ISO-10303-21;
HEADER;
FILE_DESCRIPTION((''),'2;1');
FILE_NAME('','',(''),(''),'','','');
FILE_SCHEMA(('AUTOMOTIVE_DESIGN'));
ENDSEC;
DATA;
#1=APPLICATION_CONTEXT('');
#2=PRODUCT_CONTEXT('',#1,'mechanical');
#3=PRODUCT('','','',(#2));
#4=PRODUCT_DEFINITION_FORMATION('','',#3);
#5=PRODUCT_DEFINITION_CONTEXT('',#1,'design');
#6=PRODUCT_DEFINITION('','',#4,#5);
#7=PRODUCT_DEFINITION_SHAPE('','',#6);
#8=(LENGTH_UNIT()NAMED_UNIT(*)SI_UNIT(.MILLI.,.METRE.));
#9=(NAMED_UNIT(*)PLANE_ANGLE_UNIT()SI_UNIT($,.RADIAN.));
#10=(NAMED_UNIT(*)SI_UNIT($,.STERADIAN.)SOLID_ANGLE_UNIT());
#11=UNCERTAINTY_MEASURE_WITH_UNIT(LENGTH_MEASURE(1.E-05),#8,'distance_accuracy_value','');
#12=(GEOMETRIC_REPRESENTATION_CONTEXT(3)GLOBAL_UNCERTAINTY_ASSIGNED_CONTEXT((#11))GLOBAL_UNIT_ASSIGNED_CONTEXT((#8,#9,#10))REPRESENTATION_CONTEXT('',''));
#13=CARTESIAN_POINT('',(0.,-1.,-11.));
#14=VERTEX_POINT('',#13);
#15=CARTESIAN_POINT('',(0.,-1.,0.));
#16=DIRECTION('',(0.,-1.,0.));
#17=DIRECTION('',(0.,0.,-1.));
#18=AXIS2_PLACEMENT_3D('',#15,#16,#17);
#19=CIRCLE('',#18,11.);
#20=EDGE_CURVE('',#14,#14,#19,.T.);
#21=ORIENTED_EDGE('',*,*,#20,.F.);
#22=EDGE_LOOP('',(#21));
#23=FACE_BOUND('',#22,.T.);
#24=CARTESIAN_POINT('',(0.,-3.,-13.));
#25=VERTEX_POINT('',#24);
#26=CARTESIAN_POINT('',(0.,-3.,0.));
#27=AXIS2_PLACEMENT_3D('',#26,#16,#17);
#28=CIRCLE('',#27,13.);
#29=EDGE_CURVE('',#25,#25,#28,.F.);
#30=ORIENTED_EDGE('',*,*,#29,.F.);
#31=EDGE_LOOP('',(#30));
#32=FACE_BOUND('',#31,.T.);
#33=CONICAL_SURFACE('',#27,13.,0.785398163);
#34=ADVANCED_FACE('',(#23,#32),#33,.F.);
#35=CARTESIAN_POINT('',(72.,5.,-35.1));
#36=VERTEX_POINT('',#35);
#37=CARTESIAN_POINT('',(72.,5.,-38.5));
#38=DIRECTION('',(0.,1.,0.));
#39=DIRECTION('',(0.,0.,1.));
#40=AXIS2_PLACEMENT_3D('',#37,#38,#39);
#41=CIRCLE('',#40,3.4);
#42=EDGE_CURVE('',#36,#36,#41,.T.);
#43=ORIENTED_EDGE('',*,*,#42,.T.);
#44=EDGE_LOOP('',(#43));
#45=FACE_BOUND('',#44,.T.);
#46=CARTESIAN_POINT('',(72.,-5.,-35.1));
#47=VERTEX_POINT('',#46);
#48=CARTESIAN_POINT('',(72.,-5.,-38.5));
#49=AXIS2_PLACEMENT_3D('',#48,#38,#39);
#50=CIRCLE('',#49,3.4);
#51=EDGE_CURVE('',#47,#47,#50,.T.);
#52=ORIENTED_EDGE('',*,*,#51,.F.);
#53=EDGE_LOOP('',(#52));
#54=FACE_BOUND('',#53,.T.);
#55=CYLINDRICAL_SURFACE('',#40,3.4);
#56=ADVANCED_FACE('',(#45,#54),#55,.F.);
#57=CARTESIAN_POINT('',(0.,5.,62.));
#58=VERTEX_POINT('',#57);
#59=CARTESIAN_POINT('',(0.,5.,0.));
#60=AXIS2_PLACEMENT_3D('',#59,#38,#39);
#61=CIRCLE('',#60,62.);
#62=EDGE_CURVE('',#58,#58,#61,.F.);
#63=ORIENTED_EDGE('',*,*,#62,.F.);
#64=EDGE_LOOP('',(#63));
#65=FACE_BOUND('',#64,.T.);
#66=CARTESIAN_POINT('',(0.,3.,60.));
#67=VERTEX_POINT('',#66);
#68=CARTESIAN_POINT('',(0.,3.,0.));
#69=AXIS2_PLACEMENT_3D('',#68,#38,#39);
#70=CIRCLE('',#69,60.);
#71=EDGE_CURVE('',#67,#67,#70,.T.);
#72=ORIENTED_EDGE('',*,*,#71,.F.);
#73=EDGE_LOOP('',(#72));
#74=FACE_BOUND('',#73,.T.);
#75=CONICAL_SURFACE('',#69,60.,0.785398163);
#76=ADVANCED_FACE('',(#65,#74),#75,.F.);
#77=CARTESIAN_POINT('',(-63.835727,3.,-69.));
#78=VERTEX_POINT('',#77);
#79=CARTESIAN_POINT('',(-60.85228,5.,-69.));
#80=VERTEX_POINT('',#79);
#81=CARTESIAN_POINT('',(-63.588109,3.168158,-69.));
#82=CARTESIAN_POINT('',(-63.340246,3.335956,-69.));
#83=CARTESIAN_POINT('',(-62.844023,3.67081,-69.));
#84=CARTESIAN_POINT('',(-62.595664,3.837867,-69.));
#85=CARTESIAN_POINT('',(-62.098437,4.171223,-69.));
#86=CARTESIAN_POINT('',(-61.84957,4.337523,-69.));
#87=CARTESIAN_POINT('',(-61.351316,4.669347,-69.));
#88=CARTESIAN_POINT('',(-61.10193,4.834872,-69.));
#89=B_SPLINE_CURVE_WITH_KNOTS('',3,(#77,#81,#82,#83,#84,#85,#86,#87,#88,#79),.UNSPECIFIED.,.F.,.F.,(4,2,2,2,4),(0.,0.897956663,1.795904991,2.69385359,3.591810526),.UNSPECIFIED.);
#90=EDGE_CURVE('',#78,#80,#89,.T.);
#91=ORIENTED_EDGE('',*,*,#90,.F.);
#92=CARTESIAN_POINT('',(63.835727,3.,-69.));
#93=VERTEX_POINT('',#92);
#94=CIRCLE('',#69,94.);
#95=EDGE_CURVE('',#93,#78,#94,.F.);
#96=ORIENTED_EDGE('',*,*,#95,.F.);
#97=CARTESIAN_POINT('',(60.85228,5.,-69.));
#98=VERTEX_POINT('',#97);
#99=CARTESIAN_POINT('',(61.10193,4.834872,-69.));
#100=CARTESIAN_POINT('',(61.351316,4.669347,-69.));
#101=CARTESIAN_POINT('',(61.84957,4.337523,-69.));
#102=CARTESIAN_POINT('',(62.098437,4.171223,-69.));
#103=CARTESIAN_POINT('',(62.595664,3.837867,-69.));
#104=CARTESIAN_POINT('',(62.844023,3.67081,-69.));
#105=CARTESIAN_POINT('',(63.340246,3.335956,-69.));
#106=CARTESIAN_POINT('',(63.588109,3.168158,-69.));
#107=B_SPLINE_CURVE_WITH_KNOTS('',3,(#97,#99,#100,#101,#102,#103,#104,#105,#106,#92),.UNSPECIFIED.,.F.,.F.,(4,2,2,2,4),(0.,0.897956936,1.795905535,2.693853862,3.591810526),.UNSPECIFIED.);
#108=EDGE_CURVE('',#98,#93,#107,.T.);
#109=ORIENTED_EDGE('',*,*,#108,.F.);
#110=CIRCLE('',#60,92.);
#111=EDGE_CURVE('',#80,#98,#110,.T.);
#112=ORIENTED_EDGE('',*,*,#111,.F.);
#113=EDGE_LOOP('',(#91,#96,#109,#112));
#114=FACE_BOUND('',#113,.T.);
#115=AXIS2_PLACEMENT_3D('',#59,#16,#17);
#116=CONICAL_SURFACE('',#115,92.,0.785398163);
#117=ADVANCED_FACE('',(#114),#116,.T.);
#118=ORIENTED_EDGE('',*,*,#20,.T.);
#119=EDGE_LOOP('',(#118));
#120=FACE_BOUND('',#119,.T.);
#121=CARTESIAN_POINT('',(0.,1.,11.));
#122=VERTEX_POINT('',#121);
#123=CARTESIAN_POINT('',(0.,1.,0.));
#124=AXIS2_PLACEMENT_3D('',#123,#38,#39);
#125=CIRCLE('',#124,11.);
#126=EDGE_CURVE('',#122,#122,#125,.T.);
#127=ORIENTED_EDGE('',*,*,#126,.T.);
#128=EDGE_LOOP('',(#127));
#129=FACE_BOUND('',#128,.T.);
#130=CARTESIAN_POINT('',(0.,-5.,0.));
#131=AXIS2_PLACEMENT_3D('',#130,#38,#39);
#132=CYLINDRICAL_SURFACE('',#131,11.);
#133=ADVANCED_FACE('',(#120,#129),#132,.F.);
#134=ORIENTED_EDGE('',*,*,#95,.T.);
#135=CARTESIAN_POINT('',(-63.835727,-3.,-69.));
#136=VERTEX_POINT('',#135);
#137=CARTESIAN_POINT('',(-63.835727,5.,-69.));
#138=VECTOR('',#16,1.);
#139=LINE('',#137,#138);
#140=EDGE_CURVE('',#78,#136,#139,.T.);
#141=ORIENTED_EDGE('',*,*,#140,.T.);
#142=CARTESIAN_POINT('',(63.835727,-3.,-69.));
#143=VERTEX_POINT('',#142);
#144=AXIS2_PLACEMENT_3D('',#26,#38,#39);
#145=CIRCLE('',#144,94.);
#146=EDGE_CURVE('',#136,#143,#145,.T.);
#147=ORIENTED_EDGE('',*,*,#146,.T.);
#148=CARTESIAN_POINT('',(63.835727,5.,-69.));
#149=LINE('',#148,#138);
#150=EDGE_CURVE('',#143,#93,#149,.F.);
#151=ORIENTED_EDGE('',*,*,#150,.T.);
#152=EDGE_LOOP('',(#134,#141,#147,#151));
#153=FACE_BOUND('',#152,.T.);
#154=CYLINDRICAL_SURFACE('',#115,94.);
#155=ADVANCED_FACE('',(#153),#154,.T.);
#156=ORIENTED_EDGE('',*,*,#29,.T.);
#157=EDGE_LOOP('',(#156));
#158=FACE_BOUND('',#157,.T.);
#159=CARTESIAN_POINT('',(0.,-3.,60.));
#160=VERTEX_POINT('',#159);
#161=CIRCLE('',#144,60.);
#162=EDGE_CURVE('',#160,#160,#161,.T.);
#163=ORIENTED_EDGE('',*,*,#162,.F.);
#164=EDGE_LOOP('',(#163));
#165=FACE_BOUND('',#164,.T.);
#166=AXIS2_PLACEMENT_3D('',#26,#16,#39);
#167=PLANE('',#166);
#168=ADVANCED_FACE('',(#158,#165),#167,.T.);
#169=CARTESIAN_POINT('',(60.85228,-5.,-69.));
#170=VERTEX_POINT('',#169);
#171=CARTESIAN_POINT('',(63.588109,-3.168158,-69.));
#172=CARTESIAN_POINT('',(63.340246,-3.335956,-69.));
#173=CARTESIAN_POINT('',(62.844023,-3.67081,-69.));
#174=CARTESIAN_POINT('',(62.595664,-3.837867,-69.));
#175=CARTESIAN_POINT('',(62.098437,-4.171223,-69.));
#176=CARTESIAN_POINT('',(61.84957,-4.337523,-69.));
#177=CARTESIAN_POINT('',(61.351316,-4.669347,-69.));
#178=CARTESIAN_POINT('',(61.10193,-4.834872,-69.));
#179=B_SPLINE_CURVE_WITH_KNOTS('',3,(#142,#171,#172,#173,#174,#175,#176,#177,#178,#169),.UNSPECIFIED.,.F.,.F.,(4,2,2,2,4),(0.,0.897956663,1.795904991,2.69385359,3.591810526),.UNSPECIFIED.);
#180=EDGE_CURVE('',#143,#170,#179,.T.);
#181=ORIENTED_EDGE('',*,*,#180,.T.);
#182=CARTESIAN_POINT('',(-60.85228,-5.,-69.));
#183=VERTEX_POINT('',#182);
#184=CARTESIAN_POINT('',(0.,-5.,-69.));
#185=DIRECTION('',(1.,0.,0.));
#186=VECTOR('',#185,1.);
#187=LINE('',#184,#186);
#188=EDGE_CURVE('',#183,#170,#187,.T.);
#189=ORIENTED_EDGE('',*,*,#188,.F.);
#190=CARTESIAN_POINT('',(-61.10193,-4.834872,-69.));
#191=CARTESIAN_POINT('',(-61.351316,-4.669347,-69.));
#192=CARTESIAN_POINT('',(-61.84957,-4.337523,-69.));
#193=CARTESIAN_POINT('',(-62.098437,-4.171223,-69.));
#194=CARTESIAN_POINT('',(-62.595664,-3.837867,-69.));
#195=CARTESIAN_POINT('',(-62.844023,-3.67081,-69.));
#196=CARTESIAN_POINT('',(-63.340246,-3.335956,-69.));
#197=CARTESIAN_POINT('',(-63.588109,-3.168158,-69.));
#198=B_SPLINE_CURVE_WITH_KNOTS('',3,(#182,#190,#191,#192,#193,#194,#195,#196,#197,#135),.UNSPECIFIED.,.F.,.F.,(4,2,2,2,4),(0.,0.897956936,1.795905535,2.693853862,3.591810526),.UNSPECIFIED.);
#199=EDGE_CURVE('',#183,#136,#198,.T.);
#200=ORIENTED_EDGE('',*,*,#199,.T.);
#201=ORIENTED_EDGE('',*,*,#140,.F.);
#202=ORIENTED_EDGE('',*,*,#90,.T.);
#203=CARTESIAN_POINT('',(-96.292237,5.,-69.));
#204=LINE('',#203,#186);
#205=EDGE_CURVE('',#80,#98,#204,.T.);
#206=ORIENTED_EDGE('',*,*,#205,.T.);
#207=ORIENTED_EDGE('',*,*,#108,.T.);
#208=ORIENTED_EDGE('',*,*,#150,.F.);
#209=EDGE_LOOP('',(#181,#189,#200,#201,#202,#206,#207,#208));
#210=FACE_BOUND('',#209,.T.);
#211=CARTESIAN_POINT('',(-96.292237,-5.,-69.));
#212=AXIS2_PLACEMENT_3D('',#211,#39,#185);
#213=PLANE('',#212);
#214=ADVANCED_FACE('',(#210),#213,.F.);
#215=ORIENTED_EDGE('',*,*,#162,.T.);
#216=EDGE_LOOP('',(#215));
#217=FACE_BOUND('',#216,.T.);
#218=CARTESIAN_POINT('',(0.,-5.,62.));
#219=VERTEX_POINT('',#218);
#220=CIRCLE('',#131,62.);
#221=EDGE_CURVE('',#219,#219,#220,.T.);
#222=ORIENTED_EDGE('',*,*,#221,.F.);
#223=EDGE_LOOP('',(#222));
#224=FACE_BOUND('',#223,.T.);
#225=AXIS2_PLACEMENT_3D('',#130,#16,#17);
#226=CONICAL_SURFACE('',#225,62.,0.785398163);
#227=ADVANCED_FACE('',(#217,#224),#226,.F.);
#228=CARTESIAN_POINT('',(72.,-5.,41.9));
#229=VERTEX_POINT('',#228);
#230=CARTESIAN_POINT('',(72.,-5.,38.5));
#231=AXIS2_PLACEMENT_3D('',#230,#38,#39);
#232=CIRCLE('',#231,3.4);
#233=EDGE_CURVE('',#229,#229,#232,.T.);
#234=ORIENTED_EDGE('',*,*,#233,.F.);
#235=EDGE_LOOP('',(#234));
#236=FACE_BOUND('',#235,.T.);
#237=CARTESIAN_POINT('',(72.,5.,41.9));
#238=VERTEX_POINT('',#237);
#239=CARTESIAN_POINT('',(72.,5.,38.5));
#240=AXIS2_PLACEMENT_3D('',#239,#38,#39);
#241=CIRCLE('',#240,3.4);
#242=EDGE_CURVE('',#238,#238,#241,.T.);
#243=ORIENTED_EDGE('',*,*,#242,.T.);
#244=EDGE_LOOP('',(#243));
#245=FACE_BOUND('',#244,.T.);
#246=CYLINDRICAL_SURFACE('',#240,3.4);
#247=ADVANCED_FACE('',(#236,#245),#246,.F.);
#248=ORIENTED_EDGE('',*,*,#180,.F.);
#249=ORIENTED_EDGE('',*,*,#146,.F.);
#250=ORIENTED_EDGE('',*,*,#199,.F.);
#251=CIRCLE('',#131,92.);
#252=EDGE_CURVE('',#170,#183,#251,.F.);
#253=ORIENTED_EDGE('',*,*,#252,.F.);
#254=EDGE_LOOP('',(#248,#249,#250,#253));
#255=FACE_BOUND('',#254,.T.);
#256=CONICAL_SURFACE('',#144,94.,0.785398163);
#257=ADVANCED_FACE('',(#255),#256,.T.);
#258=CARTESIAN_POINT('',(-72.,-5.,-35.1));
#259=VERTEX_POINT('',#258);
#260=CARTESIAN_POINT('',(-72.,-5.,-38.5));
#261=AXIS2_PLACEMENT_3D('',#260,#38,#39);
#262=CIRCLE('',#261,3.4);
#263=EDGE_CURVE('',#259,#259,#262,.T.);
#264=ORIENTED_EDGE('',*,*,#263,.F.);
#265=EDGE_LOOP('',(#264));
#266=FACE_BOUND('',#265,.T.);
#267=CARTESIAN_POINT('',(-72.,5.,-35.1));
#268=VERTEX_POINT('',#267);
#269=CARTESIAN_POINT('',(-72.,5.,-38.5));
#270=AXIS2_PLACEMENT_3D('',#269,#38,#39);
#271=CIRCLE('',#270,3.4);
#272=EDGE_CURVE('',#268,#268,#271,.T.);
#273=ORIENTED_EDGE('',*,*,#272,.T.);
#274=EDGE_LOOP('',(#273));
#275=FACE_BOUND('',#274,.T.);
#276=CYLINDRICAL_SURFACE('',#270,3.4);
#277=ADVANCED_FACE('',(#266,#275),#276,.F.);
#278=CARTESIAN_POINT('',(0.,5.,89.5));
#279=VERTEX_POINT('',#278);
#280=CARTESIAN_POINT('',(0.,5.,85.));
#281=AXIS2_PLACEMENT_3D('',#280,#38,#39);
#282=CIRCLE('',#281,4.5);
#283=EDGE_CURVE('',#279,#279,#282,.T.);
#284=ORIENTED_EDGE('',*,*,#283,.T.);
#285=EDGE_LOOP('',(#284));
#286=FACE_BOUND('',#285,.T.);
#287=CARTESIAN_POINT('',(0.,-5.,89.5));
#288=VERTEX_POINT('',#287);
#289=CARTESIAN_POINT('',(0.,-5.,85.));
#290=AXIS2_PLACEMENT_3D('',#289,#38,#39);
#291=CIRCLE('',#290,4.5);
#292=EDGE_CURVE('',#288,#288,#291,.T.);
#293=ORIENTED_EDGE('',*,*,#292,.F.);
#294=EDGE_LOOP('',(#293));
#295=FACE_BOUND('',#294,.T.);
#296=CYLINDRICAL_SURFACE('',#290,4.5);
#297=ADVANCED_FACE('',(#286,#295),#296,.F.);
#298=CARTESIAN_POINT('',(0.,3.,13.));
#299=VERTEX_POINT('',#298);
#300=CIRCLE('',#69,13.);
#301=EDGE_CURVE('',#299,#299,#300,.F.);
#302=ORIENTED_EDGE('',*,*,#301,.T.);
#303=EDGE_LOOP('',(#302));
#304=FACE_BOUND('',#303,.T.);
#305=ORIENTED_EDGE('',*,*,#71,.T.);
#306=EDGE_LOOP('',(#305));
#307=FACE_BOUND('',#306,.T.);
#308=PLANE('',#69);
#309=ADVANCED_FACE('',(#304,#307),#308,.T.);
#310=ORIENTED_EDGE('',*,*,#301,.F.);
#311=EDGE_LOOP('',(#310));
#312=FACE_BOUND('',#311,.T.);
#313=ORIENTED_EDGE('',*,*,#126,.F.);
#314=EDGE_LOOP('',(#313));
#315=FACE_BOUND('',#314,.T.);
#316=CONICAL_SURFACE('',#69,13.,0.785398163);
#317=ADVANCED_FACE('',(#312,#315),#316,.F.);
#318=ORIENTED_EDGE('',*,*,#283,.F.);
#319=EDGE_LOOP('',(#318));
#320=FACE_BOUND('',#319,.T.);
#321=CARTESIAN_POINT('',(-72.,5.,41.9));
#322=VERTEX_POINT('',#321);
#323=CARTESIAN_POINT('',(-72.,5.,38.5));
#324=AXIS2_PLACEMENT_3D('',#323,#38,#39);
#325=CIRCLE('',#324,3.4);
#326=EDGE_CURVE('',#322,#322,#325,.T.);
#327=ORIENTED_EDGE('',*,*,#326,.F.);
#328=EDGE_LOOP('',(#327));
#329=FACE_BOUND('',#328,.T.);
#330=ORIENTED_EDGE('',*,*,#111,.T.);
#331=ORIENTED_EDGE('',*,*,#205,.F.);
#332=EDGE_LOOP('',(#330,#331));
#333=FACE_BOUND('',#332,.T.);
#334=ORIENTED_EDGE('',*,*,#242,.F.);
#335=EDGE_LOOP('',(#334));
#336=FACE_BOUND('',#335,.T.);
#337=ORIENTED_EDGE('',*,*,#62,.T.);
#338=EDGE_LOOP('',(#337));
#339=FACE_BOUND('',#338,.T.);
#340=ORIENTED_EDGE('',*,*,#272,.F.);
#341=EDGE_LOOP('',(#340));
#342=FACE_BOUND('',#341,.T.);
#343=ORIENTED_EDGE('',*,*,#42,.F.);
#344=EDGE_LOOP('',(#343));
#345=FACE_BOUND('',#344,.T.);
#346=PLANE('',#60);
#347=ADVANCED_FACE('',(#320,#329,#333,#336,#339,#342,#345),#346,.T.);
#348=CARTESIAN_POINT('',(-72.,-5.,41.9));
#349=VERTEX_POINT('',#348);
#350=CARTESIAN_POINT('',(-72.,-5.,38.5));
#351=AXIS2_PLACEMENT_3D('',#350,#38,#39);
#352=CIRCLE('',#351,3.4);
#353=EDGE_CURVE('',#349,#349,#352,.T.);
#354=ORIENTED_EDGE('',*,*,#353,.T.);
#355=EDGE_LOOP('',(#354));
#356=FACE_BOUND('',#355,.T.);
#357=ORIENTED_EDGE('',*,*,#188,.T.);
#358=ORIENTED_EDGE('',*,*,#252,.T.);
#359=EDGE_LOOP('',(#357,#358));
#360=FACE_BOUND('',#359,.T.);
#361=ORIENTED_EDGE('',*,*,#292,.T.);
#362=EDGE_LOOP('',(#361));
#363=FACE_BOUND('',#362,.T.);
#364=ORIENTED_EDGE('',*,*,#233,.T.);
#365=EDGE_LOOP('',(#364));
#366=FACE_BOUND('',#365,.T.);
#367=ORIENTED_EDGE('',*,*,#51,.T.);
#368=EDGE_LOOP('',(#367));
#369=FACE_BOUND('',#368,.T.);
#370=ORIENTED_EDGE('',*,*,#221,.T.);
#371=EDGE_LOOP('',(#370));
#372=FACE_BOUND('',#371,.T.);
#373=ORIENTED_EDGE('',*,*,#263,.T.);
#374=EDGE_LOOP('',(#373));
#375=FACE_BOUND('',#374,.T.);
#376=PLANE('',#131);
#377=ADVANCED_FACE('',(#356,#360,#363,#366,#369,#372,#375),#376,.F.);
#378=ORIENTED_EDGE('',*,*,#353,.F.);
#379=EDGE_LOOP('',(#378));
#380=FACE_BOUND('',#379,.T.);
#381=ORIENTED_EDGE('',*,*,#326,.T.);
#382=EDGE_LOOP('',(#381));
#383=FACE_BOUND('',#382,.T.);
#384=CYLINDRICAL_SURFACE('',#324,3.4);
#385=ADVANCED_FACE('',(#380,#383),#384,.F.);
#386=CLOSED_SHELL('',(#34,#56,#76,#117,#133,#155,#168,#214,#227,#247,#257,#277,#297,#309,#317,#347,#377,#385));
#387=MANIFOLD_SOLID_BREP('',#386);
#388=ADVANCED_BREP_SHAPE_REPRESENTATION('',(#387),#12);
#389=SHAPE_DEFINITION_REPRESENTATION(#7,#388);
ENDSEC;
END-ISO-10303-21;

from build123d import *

# Parameters (mm, degrees)
SKETCH_2_R          = 94
EXTRUDE_1_DEPTH     = 5
SKETCH_3_W          = 204.518128244
SKETCH_3_H          = 25
CUT_EXTRUDE_1_DEPTH = 134.311664906
SKETCH_4_R          = 11
CUT_EXTRUDE_2_DEPTH = 134.311664906
SKETCH_5_R          = 60
CUT_EXTRUDE_3_DEPTH = 2
M8X1_25_1_D         = 6.8
M8X1_25_1_DEPTH     = 19.75
M8X1_25_1_TIP       = 2.042926105
SKETCH_8_R          = 4.5
CUT_EXTRUDE_4_DEPTH = 134.311664906
CHAMFER_1_SIZE      = 2


with BuildPart() as part:
    # 草图2 → 凸台-拉伸1 (new, symmetric)
    with BuildSketch(Plane(origin=(0, 0, 0), x_dir=(1, 0, 0), z_dir=(0, 1, 0))):
        with Locations(Location((0, 0, 0), (0, 0, 270))):
            Circle(SKETCH_2_R)
    extrude(amount=EXTRUDE_1_DEPTH, both=True)

    # 草图3 → 切除-拉伸1 (cut, through all)
    with BuildSketch(Plane(origin=(0, 5, 0), x_dir=(1, 0, 0), z_dir=(0, 1, 0))):
        with Locations((5.966826679, 81.5)):
            Rectangle(SKETCH_3_W, SKETCH_3_H)
    extrude(amount=-CUT_EXTRUDE_1_DEPTH, mode=Mode.SUBTRACT)

    # 草图4 → 切除-拉伸2 (cut, through all)
    with BuildSketch(Plane(origin=(0, 5, 0), x_dir=(1, 0, 0), z_dir=(0, 1, 0))):
        with Locations(Location((0, 0, 0), (0, 0, 270))):
            Circle(SKETCH_4_R)
    extrude(amount=-CUT_EXTRUDE_2_DEPTH, mode=Mode.SUBTRACT)

    # 草图5 → 切除-拉伸3 (cut)
    with BuildSketch(Plane(origin=(0, 5, 0), x_dir=(1, 0, 0), z_dir=(0, 1, 0))):
        with Locations(Location((0, 0, 0), (0, 0, 270))):
            Circle(SKETCH_5_R)
    cut_extrude_3 = extrude(amount=-CUT_EXTRUDE_3_DEPTH, mode=Mode.SUBTRACT)

    # 镜向1: 切除-拉伸3 across plane
    add(cut_extrude_3.mirror(Plane.ZX), mode=Mode.SUBTRACT)

    # M8x1.25 螺纹孔1
    with Locations(Plane(origin=(0, 5, 0), x_dir=(-1, 0, 0), z_dir=(0, 1, 0))):
        with Locations((72, -38.5), (-72, -38.5), (72, 38.5), (-72, 38.5)):
            Hole(M8X1_25_1_D / 2, depth=M8X1_25_1_DEPTH)
            with Locations((0, 0, -(M8X1_25_1_DEPTH + M8X1_25_1_TIP / 2))):  # 118° drill point
                Cone(0, M8X1_25_1_D / 2, M8X1_25_1_TIP, mode=Mode.SUBTRACT)

    # 草图8 → 切除-拉伸4 (cut, through all)
    with BuildSketch(Plane(origin=(0, 5, 0), x_dir=(1, 0, 0), z_dir=(0, 1, 0))):
        with Locations(Location((0, -85, 0), (0, 0, 270))):
            Circle(SKETCH_8_R)
    extrude(amount=-CUT_EXTRUDE_4_DEPTH, mode=Mode.SUBTRACT)

    # 倒角1
    chamfer_1_edges = [part.edges().sort_by_distance(p)[0] for p in [
        (0, 5, -60),
        (0, 3, -11),
        (0, -5, -60),
        (0, -3, -11),
        (0, -5, 94),
        (0, 5, 94),
    ]]
    chamfer(chamfer_1_edges, length=CHAMFER_1_SIZE - 0.0001)  # a hair under: the kernel refuses the full size


solid = part.part
